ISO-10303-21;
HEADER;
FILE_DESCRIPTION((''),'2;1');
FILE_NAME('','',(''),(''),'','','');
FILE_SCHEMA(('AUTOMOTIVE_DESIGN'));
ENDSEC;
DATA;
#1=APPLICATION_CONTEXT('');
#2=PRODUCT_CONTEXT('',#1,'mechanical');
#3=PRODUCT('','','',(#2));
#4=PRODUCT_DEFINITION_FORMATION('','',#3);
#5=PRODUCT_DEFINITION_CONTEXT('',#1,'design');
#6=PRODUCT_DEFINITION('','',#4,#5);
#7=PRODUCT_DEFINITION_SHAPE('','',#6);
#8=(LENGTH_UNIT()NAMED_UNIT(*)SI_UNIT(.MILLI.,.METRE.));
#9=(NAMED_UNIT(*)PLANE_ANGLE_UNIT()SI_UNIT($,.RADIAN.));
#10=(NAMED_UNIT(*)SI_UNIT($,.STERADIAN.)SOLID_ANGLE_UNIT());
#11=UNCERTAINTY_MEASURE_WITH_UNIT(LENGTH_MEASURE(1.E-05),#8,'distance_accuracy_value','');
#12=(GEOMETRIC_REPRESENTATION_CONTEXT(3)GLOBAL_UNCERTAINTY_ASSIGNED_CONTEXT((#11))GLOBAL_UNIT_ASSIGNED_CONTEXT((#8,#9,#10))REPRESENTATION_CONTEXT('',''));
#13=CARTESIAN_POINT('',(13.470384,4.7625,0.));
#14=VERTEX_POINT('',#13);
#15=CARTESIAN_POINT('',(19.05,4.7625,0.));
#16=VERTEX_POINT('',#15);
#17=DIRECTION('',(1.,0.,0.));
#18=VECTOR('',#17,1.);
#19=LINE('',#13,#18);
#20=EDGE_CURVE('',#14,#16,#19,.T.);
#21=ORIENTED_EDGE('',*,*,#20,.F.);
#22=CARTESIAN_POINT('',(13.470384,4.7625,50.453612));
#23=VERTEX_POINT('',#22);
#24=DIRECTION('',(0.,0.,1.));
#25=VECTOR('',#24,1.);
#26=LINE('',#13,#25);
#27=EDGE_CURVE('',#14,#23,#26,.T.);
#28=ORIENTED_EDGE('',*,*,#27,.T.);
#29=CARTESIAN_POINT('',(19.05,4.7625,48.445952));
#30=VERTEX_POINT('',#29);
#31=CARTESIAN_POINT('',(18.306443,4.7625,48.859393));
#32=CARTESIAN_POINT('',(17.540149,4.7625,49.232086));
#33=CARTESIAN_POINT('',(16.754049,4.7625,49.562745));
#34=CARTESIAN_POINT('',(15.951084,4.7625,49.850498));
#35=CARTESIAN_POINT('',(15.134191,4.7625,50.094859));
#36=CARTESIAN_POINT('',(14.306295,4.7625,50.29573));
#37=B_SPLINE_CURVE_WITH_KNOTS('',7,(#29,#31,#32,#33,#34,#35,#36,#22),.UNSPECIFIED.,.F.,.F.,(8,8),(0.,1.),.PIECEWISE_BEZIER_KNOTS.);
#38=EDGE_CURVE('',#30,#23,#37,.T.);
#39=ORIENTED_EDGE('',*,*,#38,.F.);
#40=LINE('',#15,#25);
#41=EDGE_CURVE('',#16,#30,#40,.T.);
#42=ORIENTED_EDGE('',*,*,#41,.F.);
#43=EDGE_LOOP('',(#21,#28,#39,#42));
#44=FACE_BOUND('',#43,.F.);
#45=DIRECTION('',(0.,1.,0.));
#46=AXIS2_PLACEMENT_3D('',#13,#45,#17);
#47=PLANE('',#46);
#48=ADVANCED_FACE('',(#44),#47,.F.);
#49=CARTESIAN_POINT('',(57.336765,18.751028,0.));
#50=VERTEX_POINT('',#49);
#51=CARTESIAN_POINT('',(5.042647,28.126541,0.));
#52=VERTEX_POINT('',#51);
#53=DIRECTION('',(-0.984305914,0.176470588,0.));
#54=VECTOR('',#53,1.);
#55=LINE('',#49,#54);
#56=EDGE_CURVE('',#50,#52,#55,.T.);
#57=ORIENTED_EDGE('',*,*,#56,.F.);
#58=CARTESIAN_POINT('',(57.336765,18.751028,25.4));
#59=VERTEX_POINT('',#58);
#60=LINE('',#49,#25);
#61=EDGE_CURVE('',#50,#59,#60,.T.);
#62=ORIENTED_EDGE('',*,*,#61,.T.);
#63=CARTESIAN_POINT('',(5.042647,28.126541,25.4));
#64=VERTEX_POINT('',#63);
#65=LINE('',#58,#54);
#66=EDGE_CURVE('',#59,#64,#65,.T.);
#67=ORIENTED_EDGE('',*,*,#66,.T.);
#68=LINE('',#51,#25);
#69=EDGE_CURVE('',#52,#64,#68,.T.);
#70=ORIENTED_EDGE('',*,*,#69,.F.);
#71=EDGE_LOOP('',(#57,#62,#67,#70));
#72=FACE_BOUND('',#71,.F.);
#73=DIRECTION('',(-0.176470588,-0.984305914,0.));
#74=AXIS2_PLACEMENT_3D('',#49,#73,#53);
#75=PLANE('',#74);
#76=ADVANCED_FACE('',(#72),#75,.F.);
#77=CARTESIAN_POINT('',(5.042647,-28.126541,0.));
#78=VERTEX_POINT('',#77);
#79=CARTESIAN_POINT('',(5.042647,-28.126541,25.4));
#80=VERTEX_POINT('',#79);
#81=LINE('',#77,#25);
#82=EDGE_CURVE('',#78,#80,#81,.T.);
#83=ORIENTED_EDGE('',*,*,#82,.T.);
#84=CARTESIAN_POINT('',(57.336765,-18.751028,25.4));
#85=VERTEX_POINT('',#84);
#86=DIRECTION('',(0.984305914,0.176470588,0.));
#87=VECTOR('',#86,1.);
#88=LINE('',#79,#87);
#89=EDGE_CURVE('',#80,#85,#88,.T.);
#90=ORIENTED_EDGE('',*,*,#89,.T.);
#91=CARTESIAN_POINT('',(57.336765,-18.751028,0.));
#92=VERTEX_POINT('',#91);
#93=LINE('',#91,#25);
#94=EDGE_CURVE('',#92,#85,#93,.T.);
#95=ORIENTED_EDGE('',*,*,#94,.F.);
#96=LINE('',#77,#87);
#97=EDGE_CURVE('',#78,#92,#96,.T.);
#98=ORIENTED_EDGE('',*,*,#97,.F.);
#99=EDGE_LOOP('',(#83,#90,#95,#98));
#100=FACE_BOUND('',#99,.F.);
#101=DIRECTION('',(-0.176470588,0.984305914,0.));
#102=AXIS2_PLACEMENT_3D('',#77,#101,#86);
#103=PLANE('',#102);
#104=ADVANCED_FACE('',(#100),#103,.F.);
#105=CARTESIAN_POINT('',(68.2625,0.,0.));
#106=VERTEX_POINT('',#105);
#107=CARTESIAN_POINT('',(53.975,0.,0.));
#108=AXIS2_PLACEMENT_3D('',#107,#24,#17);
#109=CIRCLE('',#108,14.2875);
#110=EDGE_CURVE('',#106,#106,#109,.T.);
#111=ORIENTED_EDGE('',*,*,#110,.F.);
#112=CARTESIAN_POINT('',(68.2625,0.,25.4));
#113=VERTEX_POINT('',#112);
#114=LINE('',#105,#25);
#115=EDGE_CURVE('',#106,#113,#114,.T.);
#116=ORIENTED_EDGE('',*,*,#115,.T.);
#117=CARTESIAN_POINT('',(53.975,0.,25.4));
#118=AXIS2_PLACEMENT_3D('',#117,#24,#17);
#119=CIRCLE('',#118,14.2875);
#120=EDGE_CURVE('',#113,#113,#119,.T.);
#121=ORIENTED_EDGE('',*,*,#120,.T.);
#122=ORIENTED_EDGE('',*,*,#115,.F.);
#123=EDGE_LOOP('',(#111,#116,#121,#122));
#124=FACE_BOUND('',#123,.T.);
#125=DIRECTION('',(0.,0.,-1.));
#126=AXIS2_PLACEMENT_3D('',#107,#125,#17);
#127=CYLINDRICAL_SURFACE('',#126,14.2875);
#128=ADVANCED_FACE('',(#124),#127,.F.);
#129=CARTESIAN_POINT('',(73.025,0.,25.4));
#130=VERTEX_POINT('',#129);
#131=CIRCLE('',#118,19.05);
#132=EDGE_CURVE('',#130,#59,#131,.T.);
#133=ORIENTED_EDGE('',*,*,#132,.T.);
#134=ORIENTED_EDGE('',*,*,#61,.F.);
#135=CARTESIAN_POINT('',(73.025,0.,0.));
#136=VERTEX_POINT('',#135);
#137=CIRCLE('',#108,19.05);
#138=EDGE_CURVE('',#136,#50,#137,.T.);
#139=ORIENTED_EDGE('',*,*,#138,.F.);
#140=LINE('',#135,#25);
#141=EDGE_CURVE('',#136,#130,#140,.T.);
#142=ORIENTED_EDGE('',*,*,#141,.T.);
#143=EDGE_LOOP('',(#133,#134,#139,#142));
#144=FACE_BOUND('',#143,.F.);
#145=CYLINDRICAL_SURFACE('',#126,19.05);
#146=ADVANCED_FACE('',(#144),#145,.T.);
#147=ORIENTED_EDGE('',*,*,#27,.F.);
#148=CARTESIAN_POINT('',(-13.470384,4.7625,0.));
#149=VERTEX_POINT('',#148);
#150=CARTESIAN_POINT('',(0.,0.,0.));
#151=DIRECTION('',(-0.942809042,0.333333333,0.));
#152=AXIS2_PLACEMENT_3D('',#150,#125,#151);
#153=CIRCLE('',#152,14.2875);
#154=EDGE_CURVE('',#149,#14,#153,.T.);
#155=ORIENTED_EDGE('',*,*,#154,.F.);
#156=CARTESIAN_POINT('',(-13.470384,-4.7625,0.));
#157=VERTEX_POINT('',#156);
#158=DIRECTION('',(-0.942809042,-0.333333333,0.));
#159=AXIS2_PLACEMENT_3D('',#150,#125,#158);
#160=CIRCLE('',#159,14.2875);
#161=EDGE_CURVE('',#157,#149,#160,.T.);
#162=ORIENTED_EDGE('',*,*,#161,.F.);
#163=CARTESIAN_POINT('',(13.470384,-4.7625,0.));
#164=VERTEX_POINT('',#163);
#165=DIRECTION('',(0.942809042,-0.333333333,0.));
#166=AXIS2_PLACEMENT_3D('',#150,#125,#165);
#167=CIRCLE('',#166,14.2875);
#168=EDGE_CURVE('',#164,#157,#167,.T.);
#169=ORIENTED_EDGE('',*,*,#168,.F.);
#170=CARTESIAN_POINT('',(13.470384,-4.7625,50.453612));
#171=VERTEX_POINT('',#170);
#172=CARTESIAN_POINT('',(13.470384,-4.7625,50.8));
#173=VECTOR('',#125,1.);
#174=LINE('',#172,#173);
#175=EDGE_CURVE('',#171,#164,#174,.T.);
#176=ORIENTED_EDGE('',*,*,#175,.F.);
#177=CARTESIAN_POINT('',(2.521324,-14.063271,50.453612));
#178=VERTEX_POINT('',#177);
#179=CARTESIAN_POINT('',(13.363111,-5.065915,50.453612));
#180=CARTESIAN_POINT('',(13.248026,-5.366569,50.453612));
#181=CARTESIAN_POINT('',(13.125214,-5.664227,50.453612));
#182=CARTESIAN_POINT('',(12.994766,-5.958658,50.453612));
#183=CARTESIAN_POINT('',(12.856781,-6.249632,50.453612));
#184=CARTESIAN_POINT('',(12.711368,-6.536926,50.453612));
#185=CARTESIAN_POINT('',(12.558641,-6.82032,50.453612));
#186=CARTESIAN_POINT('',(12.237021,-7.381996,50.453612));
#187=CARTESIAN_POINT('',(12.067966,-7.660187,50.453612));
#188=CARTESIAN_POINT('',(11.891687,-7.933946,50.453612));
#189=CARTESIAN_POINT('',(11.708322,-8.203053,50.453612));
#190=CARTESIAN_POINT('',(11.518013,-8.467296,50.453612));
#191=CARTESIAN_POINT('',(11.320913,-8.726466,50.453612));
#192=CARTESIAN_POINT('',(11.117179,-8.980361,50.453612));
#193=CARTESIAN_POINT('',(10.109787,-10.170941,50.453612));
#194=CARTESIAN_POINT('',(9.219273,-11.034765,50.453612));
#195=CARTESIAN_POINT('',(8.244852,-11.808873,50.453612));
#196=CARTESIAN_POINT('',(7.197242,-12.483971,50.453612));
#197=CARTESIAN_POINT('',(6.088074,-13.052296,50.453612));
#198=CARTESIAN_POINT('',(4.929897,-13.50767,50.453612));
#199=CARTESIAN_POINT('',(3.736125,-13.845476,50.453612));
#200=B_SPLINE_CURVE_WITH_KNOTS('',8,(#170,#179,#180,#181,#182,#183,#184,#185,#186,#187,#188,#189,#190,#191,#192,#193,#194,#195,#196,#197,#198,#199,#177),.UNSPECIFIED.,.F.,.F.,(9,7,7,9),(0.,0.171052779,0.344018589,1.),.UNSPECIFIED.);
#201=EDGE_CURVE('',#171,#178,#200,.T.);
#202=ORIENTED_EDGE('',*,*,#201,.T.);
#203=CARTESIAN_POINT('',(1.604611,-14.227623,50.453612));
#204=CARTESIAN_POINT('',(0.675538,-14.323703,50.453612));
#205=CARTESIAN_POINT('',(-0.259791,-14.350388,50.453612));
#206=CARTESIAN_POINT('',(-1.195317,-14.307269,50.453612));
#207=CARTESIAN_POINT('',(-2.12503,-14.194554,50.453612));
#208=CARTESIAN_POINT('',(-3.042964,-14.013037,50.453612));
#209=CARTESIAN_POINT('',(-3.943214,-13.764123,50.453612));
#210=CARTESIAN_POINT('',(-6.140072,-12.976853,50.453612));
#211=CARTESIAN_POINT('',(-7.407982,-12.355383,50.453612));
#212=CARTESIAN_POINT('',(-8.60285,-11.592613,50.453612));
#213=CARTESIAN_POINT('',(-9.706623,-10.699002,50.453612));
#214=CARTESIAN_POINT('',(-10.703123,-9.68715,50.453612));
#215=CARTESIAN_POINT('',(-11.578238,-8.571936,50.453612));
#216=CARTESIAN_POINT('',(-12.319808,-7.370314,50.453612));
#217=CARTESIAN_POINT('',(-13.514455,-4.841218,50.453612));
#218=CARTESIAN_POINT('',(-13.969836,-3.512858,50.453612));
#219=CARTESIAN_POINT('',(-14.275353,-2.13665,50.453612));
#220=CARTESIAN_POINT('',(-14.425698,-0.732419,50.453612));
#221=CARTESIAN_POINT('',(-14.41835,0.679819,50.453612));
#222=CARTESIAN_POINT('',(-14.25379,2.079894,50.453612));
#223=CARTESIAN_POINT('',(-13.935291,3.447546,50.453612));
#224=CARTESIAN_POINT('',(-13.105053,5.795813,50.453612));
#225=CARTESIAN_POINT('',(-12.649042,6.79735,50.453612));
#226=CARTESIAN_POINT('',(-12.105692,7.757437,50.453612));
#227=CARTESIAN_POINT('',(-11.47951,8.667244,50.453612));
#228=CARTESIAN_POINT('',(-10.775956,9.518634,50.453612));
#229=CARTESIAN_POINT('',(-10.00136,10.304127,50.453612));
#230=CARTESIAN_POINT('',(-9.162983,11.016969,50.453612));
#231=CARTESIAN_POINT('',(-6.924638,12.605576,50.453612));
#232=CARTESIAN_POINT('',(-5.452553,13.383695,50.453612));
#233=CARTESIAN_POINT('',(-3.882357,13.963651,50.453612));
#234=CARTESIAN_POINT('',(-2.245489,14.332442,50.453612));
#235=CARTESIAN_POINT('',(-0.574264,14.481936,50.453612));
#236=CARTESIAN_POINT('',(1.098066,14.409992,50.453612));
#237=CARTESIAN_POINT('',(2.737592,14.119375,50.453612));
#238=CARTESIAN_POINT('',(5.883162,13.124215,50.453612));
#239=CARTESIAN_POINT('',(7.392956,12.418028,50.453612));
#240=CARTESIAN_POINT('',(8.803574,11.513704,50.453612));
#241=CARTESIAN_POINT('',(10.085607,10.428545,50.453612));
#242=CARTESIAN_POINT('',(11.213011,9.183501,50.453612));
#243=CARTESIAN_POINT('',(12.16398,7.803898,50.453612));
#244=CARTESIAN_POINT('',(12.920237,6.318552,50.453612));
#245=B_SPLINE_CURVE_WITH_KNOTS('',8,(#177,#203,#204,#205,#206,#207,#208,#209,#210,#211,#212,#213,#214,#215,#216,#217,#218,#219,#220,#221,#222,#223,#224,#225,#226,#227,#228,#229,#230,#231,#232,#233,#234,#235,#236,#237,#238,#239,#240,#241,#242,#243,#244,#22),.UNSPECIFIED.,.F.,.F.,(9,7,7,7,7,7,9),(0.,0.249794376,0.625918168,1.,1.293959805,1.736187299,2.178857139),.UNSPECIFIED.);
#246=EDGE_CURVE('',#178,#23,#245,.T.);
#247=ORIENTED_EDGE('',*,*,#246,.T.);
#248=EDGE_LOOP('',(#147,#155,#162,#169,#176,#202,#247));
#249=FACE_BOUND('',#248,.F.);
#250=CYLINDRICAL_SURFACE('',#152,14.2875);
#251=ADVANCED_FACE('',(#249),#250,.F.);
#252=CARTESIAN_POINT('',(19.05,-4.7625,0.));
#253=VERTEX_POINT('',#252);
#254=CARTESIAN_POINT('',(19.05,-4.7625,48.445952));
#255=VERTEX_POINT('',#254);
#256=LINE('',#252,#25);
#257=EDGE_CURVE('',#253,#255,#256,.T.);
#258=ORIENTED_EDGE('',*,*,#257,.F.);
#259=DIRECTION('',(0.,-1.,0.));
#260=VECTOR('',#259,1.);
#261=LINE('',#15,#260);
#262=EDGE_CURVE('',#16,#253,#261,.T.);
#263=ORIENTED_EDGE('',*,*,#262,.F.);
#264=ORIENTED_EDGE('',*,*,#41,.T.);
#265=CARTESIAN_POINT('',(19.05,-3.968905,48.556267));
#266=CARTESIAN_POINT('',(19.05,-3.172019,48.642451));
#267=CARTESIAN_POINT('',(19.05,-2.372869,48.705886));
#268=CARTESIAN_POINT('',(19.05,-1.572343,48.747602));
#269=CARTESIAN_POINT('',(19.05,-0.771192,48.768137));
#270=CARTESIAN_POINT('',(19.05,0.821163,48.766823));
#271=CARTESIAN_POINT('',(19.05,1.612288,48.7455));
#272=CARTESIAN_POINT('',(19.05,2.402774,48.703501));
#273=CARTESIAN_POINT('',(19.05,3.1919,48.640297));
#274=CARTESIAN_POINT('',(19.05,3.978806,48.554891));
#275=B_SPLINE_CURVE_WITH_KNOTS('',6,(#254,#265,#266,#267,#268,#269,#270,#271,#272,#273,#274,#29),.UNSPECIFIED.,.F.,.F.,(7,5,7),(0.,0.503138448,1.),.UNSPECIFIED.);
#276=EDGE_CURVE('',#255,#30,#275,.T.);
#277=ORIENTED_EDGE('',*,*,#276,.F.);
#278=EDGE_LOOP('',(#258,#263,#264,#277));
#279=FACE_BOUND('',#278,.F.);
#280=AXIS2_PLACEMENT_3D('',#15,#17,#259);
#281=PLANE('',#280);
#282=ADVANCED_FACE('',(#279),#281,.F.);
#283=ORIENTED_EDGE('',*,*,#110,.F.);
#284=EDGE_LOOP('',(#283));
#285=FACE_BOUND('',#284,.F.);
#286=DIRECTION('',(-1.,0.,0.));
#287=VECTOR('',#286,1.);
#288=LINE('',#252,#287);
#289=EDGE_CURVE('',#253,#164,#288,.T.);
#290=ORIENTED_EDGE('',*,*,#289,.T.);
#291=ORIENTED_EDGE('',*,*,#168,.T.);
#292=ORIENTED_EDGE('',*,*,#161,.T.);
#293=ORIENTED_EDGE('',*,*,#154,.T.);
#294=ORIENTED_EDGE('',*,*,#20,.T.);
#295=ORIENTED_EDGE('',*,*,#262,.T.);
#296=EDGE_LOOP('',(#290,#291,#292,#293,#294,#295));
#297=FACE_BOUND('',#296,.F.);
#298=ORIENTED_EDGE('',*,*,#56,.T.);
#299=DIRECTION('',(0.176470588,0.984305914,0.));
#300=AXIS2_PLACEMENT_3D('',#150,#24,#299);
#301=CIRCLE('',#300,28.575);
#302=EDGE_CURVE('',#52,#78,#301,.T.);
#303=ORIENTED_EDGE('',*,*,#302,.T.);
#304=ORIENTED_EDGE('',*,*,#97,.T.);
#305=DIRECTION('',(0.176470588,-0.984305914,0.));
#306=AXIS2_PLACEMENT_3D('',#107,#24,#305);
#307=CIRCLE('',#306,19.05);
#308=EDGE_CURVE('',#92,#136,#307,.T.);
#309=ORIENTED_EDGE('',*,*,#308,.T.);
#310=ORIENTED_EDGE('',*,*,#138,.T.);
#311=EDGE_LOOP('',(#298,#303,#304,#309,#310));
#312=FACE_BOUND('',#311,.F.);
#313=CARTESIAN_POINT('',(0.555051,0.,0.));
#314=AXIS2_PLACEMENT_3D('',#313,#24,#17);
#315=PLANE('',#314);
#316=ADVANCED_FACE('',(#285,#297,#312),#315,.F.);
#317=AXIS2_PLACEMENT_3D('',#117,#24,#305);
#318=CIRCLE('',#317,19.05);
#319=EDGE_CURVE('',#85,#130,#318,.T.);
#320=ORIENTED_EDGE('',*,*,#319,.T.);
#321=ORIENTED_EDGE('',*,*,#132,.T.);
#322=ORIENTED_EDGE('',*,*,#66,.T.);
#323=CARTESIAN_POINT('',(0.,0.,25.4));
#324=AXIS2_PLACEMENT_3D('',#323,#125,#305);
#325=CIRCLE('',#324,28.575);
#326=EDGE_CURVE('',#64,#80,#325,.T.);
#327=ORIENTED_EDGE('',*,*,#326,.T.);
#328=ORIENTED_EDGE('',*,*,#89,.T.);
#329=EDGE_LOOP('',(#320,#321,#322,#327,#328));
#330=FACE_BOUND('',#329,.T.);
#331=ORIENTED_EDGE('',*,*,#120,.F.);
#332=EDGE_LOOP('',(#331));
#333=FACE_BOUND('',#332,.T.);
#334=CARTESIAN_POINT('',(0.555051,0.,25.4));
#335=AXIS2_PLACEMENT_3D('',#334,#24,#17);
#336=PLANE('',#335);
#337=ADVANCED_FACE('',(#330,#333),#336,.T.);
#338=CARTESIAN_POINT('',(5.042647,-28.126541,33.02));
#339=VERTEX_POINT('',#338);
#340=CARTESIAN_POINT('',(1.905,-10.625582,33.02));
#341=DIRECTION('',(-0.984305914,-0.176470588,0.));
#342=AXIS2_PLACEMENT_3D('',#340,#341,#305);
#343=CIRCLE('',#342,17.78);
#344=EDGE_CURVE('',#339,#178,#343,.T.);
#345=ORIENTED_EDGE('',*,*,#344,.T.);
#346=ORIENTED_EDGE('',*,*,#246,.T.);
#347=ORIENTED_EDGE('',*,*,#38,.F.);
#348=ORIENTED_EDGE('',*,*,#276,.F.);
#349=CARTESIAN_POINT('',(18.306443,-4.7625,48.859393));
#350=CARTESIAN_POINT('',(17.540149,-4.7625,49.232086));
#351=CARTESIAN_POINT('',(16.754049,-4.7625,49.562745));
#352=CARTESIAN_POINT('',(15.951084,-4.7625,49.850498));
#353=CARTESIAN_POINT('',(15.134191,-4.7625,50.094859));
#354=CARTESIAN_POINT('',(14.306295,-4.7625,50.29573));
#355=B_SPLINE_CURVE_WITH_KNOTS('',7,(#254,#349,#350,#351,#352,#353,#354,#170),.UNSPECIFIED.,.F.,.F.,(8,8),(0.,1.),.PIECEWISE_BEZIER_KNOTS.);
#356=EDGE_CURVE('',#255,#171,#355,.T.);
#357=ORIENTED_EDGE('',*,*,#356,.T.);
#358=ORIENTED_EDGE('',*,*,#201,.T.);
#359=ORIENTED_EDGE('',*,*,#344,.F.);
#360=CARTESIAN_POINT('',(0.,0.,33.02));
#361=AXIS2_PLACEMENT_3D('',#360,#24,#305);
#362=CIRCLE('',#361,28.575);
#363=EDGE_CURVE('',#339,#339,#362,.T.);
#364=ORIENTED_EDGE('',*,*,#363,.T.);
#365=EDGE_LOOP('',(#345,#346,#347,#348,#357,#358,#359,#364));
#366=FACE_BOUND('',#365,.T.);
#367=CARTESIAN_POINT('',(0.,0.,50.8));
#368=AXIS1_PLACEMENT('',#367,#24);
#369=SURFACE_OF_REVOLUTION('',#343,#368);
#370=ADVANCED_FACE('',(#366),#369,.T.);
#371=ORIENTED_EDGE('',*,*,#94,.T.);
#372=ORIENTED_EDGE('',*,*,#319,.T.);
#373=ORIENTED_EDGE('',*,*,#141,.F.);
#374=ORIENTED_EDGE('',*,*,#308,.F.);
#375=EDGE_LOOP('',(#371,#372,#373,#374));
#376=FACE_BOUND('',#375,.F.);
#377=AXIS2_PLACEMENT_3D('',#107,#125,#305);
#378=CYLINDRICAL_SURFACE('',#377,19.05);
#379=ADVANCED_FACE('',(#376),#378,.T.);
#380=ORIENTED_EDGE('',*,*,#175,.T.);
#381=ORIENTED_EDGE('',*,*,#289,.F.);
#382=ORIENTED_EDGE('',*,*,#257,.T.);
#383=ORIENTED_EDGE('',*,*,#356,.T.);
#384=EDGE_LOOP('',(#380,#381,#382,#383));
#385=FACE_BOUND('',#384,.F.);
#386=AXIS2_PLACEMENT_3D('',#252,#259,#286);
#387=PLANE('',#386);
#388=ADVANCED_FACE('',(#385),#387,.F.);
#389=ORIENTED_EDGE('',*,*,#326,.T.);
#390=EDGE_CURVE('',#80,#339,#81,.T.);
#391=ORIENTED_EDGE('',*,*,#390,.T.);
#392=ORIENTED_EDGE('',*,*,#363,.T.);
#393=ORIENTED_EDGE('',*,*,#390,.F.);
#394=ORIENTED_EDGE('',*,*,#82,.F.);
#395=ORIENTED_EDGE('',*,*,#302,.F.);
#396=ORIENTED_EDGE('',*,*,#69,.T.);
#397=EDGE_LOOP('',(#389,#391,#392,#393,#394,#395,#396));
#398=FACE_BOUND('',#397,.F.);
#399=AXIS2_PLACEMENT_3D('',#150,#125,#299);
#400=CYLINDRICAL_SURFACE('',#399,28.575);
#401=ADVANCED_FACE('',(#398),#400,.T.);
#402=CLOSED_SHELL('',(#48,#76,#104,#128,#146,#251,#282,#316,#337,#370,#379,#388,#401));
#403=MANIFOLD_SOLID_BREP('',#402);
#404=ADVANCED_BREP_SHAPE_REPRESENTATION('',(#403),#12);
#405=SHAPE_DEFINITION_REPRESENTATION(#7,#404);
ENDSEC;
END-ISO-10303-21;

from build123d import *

# Parameters (mm, degrees)
F0_R     = 14.2875
F1_DEPTH = 25.4
F2_DEPTH = 50.8


# Not quite as in the source:
# - a fillet or chamfer that OpenCascade refuses, or shapes differently, is made with other operations: its cross-section is extruded or revolved along the edge and cut away or added


with BuildPart() as f1:
    # F0 (on Top) → F1 (new body)
    with BuildSketch(Plane.XY):
        with BuildLine():
            ThreePointArc((5.0426470588, -28.1265414802), (21.9160245563, -18.3362616868), (28.575, 0))
            ThreePointArc((28.575, 0), (21.9160245563, 18.3362616868), (5.0426470588, 28.1265414802))
            ThreePointArc((5.0426470588, 28.1265414802), (-28.575, 0), (5.0426470588, -28.1265414802))
        make_face()
        with BuildLine():
            ThreePointArc((-13.4703841816, 4.7625), (0, 14.2875), (13.4703841816, 4.7625))
            Line((13.4703841816, 4.7625), (19.05, 4.7625))
            Line((19.05, 4.7625), (19.05, -4.7625))
            Line((19.05, -4.7625), (13.4703841816, -4.7625))
            ThreePointArc((13.4703841816, -4.7625), (0, -14.2875), (-13.4703841816, -4.7625))
            Line((-13.4703841816, -4.7625), (-19.05, -4.7625))
            Line((-19.05, -4.7625), (-19.05, 4.7625))
            Line((-19.05, 4.7625), (-13.4703841816, 4.7625))
        make_face(mode=Mode.SUBTRACT)
        with BuildLine():
            ThreePointArc((5.0426470588, 28.1265414802), (21.9160245563, 18.3362616868), (28.575, 0))
            ThreePointArc((28.575, 0), (21.9160245563, -18.3362616868), (5.0426470588, -28.1265414802))
            Line((5.0426470588, -28.1265414802), (57.3367647059, -18.7510276535))
            ThreePointArc((57.3367647059, -18.7510276535), (34.925, 0), (57.3367647059, 18.7510276535))
            Line((57.3367647059, 18.7510276535), (5.0426470588, 28.1265414802))
        make_face()
        with BuildLine():
            ThreePointArc((-13.4703841816, -4.7625), (-14.2875, 0), (-13.4703841816, 4.7625))
            Line((-13.4703841816, 4.7625), (-19.05, 4.7625))
            Line((-19.05, 4.7625), (-19.05, -4.7625))
            Line((-19.05, -4.7625), (-13.4703841816, -4.7625))
        make_face()
        with BuildLine():
            ThreePointArc((73.025, 0), (68.5856830375, 12.2241744579), (57.3367647059, 18.7510276535))
            ThreePointArc((57.3367647059, 18.7510276535), (34.925, 0), (57.3367647059, -18.7510276535))
            ThreePointArc((57.3367647059, -18.7510276535), (68.5856830375, -12.2241744579), (73.025, 0))
        make_face()
        with Locations((53.975, 0)):
            Circle(F0_R, mode=Mode.SUBTRACT)
    extrude(amount=F1_DEPTH)

    # F0 (on Top) → F2 (join)
    with BuildSketch(Plane.XY):
        with BuildLine():
            ThreePointArc((5.0426470588, -28.1265414802), (21.9160245563, -18.3362616868), (28.575, 0))
            ThreePointArc((28.575, 0), (21.9160245563, 18.3362616868), (5.0426470588, 28.1265414802))
            ThreePointArc((5.0426470588, 28.1265414802), (-28.575, 0), (5.0426470588, -28.1265414802))
        make_face()
        with BuildLine():
            ThreePointArc((-13.4703841816, 4.7625), (0, 14.2875), (13.4703841816, 4.7625))
            Line((13.4703841816, 4.7625), (19.05, 4.7625))
            Line((19.05, 4.7625), (19.05, -4.7625))
            Line((19.05, -4.7625), (13.4703841816, -4.7625))
            ThreePointArc((13.4703841816, -4.7625), (0, -14.2875), (-13.4703841816, -4.7625))
            Line((-13.4703841816, -4.7625), (-19.05, -4.7625))
            Line((-19.05, -4.7625), (-19.05, 4.7625))
            Line((-19.05, 4.7625), (-13.4703841816, 4.7625))
        make_face(mode=Mode.SUBTRACT)
        with BuildLine():
            ThreePointArc((-13.4703841816, -4.7625), (-14.2875, 0), (-13.4703841816, 4.7625))
            Line((-13.4703841816, 4.7625), (-19.05, 4.7625))
            Line((-19.05, 4.7625), (-19.05, -4.7625))
            Line((-19.05, -4.7625), (-13.4703841816, -4.7625))
        make_face()
    extrude(amount=F2_DEPTH)

    # F3: fillet of radius 17.78 on 1 edges, made by hand

    # F3_s1 → F3_t2 (revolve, cut)
    with BuildSketch(Plane(origin=(0, 0, 0), x_dir=(0, 0, 1), z_dir=(-0.9843059136, -0.1764705882, 0))):
        with BuildLine():
            ThreePointArc((33.02, -28.575), (45.5923585695, -23.3673585695), (50.8, -10.795))
            Line((50.8, -10.795), (50.8, -28.575))
            Line((50.8, -28.575), (33.02, -28.575))
        make_face()
    revolve(axis=Axis((0, 0, 50.8), (0, 0, 1)), mode=Mode.SUBTRACT)


solid = f1.part
